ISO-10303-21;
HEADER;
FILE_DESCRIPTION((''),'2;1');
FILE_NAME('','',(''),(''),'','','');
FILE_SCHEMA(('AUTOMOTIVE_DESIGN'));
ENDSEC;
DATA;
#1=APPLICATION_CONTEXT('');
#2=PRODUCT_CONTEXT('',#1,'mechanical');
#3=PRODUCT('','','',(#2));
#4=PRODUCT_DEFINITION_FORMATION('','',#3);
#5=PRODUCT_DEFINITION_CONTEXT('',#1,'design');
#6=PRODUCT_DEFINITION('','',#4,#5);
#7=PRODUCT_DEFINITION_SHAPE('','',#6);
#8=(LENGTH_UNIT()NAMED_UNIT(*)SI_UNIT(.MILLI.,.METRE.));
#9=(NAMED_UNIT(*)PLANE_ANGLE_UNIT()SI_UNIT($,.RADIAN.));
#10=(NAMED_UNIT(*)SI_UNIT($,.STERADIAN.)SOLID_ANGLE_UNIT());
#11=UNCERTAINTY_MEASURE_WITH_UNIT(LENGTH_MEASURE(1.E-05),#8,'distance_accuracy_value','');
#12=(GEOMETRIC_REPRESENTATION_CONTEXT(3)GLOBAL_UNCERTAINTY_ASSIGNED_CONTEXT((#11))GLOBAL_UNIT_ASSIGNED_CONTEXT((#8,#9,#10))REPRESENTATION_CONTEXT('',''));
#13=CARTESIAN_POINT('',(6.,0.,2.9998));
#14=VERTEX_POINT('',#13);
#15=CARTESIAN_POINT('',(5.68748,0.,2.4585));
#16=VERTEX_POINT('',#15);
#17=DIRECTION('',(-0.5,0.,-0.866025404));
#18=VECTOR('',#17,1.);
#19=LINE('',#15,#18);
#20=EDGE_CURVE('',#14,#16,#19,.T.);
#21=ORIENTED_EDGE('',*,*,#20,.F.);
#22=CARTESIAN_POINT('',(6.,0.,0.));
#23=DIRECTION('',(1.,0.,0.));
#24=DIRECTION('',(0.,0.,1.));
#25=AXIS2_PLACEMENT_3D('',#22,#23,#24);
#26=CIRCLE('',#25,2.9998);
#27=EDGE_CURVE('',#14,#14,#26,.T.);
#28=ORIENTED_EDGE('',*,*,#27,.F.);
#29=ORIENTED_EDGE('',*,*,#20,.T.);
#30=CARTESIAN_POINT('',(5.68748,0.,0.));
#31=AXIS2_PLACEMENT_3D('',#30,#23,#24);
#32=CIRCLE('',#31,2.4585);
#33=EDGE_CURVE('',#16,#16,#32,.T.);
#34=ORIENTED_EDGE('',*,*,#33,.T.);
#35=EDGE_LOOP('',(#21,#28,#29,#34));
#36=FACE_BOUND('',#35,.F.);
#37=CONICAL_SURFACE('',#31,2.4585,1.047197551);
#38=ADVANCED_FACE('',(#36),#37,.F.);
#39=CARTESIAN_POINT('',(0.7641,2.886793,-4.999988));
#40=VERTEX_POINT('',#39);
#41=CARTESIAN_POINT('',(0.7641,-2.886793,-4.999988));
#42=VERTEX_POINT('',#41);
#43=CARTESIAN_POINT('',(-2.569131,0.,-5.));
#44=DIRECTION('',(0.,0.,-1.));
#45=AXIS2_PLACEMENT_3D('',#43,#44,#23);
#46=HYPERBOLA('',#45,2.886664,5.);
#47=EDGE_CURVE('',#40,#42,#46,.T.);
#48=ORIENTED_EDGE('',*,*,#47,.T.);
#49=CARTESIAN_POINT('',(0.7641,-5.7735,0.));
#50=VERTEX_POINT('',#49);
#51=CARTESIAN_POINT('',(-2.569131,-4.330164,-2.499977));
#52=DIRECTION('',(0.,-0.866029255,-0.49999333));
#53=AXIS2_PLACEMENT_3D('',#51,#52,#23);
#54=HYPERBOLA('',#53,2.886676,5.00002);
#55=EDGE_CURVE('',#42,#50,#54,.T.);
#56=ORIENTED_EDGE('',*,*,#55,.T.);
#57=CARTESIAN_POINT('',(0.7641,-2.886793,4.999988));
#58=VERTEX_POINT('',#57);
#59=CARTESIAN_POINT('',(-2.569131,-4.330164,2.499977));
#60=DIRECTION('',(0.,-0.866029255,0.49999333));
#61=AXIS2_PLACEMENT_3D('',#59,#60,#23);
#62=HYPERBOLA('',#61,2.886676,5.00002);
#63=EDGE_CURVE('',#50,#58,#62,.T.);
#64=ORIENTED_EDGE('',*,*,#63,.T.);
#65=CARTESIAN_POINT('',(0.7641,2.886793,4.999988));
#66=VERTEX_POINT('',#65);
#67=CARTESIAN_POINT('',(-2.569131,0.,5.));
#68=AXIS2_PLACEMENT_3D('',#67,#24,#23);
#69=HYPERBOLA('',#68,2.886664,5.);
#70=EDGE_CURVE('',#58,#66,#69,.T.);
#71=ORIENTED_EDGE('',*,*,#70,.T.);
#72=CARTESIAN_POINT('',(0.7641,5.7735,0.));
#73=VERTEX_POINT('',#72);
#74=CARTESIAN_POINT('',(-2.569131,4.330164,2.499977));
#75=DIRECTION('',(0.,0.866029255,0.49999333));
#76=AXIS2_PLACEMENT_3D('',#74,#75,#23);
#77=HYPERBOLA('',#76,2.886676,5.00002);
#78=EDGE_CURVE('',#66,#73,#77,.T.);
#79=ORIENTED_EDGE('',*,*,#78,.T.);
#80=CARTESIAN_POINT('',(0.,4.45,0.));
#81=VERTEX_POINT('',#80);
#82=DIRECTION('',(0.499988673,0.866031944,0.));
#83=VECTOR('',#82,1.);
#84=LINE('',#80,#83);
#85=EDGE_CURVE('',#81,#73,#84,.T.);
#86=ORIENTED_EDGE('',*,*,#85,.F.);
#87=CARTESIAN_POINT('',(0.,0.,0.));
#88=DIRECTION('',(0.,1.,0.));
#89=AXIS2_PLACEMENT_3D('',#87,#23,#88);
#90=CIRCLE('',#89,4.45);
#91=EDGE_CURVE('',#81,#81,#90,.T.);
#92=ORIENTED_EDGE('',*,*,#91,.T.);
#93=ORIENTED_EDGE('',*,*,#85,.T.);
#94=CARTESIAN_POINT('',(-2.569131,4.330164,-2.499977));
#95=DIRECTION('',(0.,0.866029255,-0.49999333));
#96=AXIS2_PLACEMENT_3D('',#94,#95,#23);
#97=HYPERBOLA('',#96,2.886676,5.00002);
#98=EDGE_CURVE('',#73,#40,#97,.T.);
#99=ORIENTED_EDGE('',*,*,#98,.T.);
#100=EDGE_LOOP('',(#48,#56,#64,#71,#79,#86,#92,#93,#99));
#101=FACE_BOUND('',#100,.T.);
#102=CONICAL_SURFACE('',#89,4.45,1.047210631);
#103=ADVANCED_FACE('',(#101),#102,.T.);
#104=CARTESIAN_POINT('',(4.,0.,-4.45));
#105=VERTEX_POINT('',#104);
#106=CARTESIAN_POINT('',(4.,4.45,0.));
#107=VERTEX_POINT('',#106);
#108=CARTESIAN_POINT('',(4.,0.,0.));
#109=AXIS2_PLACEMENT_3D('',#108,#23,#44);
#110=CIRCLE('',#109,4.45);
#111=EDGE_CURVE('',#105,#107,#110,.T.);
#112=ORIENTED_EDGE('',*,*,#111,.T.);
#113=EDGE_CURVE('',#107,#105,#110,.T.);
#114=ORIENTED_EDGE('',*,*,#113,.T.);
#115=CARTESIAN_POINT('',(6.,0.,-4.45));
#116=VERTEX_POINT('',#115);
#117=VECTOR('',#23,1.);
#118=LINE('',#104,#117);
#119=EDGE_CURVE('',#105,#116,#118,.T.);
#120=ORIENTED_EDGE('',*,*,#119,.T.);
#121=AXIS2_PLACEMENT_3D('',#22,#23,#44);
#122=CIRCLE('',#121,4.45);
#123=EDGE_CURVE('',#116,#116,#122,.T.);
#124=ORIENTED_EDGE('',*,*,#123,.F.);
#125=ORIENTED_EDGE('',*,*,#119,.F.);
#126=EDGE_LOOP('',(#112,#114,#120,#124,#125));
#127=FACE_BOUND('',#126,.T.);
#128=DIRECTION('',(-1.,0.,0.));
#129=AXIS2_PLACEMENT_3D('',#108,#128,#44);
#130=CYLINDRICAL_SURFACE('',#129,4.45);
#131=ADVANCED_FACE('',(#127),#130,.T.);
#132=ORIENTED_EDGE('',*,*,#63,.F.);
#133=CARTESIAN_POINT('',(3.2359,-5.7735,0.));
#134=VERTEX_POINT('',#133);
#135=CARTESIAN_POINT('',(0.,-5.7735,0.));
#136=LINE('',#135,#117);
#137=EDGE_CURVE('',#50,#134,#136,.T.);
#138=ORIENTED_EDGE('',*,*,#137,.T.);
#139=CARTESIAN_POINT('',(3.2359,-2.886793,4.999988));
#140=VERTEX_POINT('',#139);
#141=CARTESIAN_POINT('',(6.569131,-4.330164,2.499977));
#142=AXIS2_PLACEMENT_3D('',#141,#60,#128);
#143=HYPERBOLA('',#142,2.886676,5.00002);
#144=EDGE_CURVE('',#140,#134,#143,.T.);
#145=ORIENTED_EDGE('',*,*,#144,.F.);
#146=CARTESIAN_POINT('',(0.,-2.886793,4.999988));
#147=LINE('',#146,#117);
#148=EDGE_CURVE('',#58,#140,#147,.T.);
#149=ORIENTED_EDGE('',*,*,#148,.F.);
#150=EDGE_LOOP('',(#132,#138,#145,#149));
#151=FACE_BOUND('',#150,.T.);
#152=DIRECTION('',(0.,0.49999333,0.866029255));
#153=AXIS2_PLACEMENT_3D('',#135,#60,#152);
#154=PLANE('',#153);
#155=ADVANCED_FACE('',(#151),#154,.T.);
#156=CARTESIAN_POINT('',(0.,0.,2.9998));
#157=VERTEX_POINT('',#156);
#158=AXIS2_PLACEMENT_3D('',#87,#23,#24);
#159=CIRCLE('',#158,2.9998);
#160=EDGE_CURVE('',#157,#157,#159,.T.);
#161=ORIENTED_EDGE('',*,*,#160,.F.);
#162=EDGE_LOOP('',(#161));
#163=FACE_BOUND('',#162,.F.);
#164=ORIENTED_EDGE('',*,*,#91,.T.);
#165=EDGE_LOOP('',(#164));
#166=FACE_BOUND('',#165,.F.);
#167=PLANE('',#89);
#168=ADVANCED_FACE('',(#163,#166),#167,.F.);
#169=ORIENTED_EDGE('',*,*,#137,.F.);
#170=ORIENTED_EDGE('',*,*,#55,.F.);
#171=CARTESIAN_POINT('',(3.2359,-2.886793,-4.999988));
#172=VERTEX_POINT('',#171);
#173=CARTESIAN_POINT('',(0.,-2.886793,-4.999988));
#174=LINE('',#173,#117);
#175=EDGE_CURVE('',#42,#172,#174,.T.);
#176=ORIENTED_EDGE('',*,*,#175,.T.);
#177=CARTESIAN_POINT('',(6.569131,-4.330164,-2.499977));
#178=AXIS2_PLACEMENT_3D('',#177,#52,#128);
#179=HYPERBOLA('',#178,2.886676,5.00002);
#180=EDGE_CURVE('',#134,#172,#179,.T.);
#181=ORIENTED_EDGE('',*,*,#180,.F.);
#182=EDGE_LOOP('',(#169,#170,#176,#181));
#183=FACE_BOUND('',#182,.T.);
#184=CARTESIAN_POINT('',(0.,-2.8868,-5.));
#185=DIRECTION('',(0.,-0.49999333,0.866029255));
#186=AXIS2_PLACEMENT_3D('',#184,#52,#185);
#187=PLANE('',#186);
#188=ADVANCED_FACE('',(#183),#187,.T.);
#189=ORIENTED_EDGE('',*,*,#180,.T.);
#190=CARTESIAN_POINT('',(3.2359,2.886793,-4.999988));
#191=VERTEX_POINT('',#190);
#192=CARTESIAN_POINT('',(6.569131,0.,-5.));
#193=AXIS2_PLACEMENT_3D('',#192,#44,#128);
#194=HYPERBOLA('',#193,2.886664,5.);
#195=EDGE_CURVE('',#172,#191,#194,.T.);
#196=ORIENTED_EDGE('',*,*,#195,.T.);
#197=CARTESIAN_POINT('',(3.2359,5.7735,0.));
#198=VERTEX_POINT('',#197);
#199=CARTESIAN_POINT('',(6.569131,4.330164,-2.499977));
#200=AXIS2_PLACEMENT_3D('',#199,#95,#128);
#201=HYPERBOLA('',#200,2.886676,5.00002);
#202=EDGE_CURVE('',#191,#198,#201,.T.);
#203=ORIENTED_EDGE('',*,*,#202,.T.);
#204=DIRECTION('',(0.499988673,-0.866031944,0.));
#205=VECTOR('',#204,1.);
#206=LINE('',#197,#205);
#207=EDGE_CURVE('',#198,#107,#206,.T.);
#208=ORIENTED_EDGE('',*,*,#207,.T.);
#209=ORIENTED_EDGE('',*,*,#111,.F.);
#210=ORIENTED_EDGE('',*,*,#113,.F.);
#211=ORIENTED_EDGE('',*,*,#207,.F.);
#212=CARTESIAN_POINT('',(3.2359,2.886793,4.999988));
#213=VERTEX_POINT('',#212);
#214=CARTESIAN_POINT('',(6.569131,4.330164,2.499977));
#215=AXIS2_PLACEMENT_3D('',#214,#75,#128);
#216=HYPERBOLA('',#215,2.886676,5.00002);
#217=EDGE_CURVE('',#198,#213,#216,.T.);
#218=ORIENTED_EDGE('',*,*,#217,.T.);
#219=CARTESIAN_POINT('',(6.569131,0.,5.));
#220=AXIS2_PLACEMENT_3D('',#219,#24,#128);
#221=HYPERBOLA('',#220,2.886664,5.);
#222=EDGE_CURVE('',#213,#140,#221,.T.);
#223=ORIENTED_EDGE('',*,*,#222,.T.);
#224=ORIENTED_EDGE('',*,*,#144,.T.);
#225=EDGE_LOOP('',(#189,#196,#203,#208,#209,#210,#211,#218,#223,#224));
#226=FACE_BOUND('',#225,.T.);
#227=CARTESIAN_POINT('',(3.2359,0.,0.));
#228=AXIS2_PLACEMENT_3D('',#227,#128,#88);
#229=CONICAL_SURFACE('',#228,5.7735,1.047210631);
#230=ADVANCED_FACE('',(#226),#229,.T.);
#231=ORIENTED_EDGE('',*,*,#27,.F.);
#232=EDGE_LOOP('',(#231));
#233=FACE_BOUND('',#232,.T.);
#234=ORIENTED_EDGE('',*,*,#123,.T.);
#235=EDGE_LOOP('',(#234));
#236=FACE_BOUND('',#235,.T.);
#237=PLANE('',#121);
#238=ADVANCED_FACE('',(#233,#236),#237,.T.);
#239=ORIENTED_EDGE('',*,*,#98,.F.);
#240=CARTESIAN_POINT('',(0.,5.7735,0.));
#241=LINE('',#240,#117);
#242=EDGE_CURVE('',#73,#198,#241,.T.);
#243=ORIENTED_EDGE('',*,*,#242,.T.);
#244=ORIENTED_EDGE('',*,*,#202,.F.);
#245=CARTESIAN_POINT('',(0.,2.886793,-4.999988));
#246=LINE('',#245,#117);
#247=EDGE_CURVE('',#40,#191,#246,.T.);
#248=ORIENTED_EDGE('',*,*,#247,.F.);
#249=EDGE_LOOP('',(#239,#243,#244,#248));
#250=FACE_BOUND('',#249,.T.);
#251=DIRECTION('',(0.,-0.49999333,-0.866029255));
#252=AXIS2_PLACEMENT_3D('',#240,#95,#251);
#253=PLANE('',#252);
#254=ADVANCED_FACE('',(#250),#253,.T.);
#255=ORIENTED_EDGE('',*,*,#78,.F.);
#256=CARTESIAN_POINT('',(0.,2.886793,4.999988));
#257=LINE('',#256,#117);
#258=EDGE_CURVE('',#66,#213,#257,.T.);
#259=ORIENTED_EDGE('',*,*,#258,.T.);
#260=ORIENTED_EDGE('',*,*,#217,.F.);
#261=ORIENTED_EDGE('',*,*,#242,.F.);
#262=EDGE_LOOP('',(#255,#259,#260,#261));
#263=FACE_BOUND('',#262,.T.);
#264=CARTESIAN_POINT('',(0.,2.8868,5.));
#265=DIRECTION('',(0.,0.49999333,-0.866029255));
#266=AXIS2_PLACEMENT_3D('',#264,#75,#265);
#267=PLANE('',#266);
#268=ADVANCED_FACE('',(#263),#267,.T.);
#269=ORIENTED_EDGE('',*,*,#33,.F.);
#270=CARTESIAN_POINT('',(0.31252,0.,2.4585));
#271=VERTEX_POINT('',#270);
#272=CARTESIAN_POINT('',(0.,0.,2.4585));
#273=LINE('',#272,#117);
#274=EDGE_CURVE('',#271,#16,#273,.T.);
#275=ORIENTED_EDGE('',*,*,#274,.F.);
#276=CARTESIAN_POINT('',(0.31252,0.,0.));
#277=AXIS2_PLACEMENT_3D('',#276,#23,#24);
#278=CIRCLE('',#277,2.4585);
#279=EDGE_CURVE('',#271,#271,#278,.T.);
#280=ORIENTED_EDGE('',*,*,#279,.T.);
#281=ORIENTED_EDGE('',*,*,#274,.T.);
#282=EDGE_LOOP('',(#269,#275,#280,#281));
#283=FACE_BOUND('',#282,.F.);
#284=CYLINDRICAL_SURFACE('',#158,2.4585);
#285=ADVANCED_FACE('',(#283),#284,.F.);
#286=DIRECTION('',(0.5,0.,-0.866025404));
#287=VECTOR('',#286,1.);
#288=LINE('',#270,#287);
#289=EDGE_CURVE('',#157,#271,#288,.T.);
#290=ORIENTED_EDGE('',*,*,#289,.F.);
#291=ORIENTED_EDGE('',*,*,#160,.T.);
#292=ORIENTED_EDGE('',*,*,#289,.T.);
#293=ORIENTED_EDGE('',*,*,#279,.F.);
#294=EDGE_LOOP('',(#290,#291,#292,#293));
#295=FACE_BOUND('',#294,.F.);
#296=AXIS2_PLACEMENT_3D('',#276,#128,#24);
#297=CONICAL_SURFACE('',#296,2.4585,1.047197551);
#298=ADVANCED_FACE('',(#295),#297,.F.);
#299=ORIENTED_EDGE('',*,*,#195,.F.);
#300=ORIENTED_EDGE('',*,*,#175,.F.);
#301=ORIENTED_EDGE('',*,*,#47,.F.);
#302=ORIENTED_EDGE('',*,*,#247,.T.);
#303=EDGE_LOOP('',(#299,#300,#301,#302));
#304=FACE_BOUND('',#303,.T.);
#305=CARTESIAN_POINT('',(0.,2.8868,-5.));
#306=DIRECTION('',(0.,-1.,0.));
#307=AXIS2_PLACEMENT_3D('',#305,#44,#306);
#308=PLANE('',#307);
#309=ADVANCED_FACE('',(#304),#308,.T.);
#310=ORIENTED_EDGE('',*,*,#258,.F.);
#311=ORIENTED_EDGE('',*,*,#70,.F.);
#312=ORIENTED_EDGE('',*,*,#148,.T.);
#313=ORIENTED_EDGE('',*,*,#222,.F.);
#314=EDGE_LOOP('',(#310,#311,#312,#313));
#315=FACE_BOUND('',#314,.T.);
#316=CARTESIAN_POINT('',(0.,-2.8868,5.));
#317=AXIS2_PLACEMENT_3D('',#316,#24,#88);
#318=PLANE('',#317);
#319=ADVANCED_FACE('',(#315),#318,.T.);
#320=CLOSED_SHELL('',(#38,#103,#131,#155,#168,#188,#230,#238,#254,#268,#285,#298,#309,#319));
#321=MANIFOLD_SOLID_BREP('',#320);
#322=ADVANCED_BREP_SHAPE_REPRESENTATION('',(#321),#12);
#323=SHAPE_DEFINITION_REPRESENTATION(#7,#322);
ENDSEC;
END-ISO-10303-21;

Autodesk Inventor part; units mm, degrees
ref_plane "YZ Plane" through (0, 0, 0) normal (1, 0, 0) x (0, 1, 0)
ref_plane "XZ Plane" through (0, 0, 0) normal (0, 1, 0) x (-1, 0, 0)
sketch "Skizze1" plane through (0, 0, 0) normal (1, 0, 0) x (0, 1, 0)
  line L0 (2.8868, -5) -> (-2.8868, -5)
  line L1 (-2.8868, -5) -> (-5.7735, 0)
  line L2 (-5.7735, 0) -> (-2.8868, 5)
  line L3 (-2.8868, 5) -> (2.8868, 5)
  line L4 (2.8868, 5) -> (5.7735, 0)
  line L5 (5.7735, 0) -> (2.8868, -5)
  point P0 (0, 0)
  point P1 (0, 0)
  dimension "d0" = 11.547
extrude "Körper" add sketch "Skizze1" along normal blind 4
sketch "Skizze2" plane through (4, 0, 0) normal (1, 0, 0) x (0, 0, -1)
  circle A0 centre (0, 0) radius 4.45
  dimension "d7" = 8.9
extrude "Ring" add sketch "Skizze2" along normal blind 2
sketch "Skizze3" plane through (0, 0, 0) normal (0, 0, 1) x (1, 0, 0)
  line L0 (0, 2.8868) -> (0, 5.7735) projected
  line L1 (0, 5.7735) -> (4, 5.7735) projected
  line L2 (4, 2.8868) -> (4, 5.7735) projected
  line L3 (-0.8, 0) -> (4.8, 0) projected
  line L4 (0, 4.45) -> (0.7641, 5.7735)
  line L5 (3.2359, 5.7735) -> (4, 4.45)
  dimension "d3" = 30
  dimension "d4" = 30
  dimension "d5" = 8.9
  dimension "d6" = 8.9
revolve "Fase1" cut sketch "Skizze3" angle 360 about axis through (-10, 0, 0) along (1, 0, 0)
sketch "Skizze4" plane through (0, 0, 0) normal (-1, 0, 0) x (0, 0, 1)
  line L0 (0, -8.0829) -> (0, 8.0829) projected
  line L1 (-7, 0) -> (7, 0) projected
  point P0 (0, 0)
hole "Gewinde" at (0, 0, 0) direction (1, 0, 0) diameter 4.917 end through all thread size "M6x1" class "6H" standard "ISO Metric profile"
chamfer "Fase2" distance 0.5413 angle 30 1 edges at (0, 0, -2.4585) measured on face at (0, 3.7371, -0.4538)
chamfer "Fase3" distance 0.5413 angle 30 1 edges at (6, 0, -2.4585) measured on face at (6, -0.5511, -3.7193)
ref_plane "Work Plane1" through (16.4368, 0, 0) normal (0, 0, 1) x (-1, 0, 0)
equation "\"d0\" = 1.1547 * SW"
equation "\"d1\" = KOH1"
equation "\"d7\" = SD2"
equation "\"d8\" = KOH - KOH1"
equation "\"d3\" = ANG1"
equation "\"d4\" = ANG2"
equation "\"d5\" = SW0"
equation "\"d6\" = SW01"
equation "\"d10\" = -0.5 * GD1 + 0.5 * NND"
equation "\"d46\" = -0.5 * GD1 + 0.5 * NND"
equation "\"d12\" = -0.5 * GD1 + 0.5 * NND"
equation "\"d47\" = -0.5 * GD1 + 0.5 * NND"
equation "\"ANG1\" = 30deg"
equation "\"ANG2\" = 30deg"
equation "\"NND\" = 6"
equation "\"KOH1\" = 4"
equation "\"KOH\" = 6"
equation "\"SW0\" = 8.9"
equation "\"SW01\" = SW0"
equation "\"SD2\" = SW0"
equation "\"GUL\" = 0.541266 * PTC"
equation "\"THREADDIA\" = 6"
equation "\"TOA\" = 30deg"
equation "\"PTC\" = 1"
equation "\"GAL\" = 0.541266 * PTC"
equation "\"E0\" = 1.155 * SW"
equation "\"SW\" = 10"
equation "\"GD1\" = 4.917468"
properties part number "DIN 985 - M6" material "Stahl, weich"
